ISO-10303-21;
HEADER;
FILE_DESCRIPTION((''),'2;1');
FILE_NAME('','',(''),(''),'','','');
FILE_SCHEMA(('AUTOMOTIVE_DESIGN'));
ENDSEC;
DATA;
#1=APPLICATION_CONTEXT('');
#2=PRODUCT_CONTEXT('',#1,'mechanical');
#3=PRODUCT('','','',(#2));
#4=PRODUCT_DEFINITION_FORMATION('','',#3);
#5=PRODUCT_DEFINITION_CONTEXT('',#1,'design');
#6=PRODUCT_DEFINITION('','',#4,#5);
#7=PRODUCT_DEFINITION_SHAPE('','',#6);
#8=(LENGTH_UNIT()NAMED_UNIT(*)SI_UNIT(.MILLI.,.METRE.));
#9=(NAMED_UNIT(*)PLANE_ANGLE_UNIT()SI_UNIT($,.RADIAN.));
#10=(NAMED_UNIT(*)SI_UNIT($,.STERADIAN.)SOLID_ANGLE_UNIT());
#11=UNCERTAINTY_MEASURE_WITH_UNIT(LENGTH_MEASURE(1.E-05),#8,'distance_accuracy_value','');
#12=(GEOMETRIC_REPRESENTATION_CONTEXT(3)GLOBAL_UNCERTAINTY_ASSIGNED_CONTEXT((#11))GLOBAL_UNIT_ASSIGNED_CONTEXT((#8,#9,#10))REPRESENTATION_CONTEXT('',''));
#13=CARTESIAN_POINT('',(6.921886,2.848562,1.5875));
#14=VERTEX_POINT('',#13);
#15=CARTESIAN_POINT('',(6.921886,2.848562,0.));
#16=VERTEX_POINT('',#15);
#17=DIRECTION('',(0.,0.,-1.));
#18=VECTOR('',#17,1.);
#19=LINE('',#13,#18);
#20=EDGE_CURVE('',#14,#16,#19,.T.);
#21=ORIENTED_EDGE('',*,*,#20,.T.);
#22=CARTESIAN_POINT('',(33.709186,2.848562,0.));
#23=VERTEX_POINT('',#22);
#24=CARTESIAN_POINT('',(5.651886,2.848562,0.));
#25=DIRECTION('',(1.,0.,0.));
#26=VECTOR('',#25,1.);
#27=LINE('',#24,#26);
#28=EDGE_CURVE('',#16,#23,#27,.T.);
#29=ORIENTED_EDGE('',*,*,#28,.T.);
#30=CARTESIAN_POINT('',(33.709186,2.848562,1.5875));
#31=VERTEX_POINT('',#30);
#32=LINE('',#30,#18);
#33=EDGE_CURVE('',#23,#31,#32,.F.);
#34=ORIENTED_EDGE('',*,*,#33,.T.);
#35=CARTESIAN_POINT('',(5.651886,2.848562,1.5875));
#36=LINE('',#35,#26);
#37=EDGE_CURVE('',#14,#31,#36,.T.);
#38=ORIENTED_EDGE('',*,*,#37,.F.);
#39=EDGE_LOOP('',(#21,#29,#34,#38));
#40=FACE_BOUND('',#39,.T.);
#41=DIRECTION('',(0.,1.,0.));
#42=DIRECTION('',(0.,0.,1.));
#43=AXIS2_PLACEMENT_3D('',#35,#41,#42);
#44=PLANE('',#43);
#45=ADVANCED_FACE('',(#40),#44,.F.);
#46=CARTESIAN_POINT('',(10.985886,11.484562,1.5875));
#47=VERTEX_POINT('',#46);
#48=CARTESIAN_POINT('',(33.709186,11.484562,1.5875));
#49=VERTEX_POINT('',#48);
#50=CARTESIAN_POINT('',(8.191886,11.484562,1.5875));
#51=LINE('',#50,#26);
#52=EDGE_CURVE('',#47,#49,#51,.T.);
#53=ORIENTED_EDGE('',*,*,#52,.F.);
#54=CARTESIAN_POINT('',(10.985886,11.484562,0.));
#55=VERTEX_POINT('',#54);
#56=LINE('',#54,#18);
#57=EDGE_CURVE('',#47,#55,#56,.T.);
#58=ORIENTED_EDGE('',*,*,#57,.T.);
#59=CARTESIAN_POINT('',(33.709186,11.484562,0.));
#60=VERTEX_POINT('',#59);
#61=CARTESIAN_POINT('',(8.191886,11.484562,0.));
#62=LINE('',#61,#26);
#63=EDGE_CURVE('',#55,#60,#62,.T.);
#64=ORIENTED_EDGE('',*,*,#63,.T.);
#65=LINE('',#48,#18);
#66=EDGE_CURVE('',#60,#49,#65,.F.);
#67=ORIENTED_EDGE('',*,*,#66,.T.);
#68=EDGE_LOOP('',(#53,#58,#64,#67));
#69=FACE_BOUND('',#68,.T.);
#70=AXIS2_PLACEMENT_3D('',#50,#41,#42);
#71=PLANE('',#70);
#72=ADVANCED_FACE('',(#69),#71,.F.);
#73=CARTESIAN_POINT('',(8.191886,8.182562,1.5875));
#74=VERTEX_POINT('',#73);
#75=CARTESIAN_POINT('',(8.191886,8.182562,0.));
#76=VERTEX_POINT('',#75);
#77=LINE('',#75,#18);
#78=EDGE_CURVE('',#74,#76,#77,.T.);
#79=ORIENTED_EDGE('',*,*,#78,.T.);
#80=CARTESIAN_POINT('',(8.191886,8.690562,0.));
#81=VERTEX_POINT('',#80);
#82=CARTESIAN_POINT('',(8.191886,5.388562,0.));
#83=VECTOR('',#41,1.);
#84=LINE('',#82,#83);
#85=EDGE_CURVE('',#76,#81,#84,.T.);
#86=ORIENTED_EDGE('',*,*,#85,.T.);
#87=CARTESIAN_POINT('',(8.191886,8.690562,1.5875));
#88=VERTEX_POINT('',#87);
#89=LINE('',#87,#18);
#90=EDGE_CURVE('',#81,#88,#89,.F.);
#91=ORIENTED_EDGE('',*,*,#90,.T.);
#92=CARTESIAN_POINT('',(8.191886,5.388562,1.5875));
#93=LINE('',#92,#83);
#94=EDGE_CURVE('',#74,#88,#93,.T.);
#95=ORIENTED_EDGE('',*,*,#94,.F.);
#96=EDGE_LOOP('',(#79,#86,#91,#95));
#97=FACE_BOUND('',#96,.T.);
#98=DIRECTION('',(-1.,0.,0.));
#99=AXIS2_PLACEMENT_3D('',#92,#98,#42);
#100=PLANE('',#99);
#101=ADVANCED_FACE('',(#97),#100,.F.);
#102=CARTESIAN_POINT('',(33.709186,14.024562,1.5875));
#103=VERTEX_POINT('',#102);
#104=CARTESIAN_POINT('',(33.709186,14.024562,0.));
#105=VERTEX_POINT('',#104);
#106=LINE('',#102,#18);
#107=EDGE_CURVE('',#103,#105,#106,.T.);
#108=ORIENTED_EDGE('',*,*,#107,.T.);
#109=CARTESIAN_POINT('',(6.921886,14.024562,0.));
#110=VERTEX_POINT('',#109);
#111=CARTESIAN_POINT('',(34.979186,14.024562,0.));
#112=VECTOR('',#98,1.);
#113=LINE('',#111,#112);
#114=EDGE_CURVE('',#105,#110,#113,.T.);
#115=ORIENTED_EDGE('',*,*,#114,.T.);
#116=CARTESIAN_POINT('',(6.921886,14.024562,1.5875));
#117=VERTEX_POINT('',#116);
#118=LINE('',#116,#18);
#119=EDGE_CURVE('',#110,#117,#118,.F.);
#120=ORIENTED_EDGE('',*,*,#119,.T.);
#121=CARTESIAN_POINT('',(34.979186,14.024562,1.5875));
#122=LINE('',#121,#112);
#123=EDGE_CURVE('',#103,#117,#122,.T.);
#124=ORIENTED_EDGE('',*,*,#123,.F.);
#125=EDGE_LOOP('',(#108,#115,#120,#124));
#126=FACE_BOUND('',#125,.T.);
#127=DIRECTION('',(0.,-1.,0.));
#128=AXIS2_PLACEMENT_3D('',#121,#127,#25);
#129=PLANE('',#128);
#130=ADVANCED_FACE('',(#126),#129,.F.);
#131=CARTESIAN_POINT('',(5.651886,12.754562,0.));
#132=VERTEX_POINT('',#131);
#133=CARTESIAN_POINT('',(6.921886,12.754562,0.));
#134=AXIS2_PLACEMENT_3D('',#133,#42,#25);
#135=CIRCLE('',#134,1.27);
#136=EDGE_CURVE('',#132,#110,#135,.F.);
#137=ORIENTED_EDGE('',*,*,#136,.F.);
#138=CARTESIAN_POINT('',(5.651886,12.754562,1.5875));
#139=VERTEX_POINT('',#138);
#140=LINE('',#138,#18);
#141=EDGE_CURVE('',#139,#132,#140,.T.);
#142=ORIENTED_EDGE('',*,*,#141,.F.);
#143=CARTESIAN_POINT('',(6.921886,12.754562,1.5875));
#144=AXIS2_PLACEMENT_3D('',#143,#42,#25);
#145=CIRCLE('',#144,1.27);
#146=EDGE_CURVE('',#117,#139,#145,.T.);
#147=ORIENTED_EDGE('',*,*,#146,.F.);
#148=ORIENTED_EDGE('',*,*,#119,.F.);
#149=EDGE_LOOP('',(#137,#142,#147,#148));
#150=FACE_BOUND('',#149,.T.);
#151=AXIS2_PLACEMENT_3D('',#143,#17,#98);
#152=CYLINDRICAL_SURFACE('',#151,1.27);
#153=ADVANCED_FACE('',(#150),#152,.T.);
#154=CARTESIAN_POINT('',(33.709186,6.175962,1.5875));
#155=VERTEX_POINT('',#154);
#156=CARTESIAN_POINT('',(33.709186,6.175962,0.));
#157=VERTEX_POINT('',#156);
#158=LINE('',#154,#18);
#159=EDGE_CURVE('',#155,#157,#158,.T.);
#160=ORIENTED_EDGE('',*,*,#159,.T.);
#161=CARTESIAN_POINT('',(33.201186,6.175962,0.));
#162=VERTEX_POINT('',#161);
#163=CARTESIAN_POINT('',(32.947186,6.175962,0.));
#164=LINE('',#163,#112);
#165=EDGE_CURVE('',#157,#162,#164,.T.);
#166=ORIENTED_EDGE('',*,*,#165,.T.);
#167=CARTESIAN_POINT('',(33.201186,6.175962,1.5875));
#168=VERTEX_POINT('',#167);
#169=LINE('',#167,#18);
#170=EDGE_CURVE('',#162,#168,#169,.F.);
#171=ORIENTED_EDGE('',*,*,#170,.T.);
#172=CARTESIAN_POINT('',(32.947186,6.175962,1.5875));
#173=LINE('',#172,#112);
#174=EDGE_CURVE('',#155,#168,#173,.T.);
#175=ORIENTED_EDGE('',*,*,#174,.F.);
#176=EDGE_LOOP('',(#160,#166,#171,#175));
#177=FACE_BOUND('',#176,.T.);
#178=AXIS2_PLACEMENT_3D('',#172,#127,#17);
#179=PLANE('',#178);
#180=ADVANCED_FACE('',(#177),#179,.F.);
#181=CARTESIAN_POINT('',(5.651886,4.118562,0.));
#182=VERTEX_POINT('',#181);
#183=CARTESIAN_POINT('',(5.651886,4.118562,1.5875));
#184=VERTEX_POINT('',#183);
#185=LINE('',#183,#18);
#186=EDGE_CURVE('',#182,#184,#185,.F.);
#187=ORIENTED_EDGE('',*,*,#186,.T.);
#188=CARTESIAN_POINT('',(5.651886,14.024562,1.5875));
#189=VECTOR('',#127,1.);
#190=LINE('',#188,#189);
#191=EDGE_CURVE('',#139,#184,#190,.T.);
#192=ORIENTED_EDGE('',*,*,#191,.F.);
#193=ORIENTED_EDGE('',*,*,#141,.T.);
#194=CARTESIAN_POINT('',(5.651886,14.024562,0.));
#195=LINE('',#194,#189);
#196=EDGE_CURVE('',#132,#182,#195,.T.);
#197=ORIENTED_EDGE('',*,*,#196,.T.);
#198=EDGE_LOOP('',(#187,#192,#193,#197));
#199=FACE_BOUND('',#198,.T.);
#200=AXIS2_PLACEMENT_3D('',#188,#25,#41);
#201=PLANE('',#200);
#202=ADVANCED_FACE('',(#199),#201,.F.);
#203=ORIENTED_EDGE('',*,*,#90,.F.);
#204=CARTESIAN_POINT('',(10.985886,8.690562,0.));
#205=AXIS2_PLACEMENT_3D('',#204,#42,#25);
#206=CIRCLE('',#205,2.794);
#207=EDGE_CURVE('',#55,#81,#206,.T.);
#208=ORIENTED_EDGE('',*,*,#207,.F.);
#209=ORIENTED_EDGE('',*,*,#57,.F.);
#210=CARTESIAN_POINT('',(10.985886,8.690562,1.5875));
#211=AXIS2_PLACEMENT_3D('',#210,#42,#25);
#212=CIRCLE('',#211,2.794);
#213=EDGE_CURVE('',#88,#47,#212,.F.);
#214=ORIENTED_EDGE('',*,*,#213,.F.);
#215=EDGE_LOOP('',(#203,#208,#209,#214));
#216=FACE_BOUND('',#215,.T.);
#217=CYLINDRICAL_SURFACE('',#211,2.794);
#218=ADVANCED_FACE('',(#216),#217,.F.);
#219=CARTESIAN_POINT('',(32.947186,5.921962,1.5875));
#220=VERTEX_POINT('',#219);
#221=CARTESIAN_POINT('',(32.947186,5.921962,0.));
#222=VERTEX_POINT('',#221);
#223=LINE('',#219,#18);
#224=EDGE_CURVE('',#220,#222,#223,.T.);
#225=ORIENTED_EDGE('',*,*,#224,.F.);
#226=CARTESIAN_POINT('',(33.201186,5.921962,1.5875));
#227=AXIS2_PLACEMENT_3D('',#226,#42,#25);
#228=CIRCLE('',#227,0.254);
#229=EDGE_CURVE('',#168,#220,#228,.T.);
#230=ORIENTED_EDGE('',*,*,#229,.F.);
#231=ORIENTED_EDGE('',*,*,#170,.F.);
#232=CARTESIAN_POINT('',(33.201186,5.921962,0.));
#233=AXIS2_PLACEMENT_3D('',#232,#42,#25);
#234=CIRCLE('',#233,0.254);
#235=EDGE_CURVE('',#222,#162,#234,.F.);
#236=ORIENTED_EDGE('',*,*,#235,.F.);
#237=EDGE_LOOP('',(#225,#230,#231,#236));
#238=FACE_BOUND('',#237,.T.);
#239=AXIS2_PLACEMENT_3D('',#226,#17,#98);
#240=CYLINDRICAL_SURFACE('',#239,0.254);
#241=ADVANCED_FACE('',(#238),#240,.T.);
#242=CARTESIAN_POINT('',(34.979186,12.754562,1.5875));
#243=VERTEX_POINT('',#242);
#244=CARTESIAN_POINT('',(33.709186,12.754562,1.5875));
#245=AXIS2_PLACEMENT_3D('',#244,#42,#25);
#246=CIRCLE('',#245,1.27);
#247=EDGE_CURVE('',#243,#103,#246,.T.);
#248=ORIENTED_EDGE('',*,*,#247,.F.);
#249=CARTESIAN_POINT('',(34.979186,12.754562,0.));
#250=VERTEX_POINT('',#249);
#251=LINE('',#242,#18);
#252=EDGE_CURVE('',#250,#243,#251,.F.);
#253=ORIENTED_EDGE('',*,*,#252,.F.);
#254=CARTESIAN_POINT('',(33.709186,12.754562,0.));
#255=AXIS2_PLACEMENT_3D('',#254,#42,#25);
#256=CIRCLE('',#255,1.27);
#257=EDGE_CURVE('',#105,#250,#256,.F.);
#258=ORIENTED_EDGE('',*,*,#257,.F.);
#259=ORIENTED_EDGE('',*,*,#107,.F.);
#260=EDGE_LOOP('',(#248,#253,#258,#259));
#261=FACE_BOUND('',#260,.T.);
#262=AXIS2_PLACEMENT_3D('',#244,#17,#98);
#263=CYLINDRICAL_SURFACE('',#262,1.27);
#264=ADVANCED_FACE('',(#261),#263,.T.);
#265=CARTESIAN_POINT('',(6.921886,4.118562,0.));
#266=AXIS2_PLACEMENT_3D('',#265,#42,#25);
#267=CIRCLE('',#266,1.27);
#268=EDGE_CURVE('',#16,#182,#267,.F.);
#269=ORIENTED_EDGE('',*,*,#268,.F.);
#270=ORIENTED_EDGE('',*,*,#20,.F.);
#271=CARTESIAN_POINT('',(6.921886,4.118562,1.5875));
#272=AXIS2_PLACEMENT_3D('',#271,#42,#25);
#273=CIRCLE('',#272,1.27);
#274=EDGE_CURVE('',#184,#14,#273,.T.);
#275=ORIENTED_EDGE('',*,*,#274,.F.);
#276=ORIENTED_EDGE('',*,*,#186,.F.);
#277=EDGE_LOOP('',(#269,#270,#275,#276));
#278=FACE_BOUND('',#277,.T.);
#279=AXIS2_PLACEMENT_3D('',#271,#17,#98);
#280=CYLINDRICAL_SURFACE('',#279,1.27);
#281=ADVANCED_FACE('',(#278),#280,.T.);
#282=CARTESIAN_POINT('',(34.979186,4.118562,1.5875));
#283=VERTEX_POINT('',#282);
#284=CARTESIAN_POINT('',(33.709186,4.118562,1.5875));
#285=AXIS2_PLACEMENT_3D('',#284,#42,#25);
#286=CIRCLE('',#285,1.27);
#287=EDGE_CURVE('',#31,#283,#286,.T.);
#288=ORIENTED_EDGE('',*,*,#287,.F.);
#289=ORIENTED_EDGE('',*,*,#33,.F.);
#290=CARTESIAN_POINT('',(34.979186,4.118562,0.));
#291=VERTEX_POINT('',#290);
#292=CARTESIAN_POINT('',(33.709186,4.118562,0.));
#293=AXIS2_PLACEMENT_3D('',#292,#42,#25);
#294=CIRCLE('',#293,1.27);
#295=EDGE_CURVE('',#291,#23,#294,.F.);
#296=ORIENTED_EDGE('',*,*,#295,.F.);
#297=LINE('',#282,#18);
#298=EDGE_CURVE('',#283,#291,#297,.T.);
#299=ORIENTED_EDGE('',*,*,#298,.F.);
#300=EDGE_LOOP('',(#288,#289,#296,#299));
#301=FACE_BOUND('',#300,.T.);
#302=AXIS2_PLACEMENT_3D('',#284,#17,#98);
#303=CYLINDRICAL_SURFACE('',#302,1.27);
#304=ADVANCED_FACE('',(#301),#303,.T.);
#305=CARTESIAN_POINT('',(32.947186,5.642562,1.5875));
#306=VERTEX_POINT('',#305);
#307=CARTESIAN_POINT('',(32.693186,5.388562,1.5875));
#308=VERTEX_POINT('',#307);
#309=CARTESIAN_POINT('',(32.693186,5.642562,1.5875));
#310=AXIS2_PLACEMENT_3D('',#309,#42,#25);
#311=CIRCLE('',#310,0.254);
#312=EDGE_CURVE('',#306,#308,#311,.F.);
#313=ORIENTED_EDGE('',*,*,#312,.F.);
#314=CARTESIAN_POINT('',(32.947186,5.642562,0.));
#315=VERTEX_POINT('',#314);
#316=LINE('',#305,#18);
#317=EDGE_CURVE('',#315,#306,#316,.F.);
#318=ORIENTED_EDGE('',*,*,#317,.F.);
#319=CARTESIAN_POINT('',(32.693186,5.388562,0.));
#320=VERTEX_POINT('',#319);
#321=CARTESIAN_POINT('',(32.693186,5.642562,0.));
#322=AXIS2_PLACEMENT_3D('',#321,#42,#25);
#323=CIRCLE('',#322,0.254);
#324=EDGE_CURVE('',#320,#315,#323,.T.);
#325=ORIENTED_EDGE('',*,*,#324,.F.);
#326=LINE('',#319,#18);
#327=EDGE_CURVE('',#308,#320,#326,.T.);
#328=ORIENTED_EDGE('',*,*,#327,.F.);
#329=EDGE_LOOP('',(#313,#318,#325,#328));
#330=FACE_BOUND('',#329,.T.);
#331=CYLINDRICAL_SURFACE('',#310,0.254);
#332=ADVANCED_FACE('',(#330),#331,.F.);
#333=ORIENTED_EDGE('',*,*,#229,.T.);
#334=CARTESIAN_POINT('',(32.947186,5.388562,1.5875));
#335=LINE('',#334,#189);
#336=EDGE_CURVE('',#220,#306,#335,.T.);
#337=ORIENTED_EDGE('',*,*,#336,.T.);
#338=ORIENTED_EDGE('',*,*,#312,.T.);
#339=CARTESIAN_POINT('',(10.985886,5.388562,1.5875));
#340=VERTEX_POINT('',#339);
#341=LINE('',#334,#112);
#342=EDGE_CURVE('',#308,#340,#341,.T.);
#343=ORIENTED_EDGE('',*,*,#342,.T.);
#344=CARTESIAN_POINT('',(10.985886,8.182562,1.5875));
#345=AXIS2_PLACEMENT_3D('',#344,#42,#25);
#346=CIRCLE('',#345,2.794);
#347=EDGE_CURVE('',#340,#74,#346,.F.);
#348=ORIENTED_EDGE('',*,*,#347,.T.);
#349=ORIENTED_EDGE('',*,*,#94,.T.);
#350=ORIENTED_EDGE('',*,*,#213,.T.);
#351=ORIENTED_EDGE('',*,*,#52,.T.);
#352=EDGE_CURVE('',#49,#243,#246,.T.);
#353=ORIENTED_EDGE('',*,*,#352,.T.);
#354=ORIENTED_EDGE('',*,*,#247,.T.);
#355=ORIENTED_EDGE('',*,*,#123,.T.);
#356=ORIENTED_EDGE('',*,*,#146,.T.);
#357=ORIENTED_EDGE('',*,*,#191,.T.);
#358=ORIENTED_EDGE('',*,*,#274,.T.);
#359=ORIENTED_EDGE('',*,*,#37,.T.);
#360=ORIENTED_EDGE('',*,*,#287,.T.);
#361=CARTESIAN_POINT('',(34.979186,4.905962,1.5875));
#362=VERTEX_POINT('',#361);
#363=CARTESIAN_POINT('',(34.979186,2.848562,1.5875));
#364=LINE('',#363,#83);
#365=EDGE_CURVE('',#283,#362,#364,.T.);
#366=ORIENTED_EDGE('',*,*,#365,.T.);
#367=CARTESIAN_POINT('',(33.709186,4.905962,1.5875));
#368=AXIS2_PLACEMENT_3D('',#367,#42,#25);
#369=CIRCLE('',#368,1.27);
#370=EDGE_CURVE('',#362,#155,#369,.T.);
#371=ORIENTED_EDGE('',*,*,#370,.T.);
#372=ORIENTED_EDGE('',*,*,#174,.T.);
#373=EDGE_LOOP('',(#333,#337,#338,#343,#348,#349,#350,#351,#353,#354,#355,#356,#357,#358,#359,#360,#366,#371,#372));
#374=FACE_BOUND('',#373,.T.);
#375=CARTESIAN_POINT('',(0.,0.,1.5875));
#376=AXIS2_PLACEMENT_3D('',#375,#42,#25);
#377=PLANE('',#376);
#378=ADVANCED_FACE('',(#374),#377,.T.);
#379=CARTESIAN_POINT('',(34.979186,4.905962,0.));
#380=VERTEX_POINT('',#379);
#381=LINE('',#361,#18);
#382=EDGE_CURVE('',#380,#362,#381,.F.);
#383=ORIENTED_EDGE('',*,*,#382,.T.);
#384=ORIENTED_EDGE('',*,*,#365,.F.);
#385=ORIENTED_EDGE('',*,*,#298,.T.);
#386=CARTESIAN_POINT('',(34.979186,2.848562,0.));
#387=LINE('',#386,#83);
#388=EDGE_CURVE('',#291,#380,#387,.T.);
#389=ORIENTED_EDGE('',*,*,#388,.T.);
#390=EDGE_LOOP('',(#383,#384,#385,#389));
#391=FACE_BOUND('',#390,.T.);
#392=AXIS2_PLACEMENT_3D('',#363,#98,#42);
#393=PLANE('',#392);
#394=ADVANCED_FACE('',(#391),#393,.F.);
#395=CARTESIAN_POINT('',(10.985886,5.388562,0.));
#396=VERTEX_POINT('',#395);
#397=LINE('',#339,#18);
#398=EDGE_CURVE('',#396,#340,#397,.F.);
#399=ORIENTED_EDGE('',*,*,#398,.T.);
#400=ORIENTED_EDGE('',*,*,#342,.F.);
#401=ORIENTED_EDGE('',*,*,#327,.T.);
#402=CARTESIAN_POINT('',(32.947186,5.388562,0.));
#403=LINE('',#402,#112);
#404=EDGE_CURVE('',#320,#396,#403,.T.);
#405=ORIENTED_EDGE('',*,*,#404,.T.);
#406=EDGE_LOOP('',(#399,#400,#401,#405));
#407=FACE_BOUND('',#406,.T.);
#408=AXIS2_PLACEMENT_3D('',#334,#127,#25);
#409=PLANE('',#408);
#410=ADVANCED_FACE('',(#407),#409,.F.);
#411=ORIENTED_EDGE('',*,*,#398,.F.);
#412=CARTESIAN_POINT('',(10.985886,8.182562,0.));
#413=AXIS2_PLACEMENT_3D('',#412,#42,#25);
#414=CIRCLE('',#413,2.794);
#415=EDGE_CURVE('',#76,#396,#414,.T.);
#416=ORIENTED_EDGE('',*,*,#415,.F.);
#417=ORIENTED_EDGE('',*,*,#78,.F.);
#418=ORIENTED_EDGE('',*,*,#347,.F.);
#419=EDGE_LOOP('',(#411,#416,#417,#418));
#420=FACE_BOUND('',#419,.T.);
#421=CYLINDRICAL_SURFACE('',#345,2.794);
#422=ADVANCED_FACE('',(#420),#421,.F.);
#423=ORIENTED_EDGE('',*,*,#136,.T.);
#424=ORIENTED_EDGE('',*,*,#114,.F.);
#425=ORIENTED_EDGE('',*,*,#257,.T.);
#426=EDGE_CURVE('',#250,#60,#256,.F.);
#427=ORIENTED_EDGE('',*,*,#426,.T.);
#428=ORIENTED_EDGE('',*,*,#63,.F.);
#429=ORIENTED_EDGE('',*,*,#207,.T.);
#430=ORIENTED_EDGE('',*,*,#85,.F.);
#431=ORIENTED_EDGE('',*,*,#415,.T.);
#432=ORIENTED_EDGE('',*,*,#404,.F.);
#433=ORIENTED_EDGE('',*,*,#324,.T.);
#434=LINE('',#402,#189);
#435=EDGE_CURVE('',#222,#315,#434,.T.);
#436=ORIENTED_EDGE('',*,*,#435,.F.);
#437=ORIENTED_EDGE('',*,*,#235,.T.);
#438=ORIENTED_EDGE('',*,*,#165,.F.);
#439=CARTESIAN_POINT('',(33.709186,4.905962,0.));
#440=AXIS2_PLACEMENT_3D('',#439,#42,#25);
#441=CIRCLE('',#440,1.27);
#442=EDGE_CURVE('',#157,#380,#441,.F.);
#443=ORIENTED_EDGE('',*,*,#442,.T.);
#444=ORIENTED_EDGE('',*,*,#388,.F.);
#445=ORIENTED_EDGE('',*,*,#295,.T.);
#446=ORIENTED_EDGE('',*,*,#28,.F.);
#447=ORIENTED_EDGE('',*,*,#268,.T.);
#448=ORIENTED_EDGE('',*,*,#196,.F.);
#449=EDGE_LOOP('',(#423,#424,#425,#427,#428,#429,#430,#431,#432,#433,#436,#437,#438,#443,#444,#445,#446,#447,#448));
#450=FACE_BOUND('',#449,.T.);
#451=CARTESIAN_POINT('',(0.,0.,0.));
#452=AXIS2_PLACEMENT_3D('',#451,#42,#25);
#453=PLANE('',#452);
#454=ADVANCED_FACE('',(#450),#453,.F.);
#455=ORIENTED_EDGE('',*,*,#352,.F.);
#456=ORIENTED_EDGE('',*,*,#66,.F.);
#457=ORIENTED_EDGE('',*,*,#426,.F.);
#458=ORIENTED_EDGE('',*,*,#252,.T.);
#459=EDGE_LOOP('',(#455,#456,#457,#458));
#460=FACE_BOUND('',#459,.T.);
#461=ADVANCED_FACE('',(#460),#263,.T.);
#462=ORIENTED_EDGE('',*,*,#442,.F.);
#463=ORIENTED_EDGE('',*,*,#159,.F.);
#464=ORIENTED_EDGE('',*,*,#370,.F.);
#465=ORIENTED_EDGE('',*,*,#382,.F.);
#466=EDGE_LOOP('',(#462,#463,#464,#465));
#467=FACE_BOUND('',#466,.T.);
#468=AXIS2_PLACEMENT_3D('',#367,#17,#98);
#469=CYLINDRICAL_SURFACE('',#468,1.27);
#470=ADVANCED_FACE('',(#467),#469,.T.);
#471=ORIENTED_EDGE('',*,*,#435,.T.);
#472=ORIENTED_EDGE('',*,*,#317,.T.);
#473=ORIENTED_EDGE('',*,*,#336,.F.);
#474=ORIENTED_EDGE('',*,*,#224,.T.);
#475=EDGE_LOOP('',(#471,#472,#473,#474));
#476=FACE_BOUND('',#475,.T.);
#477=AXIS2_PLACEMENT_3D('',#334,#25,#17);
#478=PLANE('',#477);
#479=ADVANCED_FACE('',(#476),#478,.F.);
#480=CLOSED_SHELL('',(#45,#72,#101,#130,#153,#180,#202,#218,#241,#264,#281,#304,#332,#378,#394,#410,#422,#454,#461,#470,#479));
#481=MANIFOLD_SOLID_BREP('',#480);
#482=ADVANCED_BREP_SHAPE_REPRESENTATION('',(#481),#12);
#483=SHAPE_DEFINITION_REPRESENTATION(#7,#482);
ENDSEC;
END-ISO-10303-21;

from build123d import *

# Parameters (mm, degrees)
BOSS_EXTRUDE1_DEPTH = 1.5875
FILLET1_R           = 1.27
FILLET2_R           = 0.254
FILLET3_R           = 2.794


with BuildPart() as part:
    # Sketch1 → Boss-Extrude1 (new body)
    with BuildSketch(Plane.XY):
        Polygon((5.651886258, 2.848562209), (34.979186258, 2.848562209), (34.979186258, 6.175962209), (32.947186258, 6.175962209), (32.947186258, 5.388562209), (8.191886258, 5.388562209), (8.191886258, 11.484562209), (34.979186258, 11.484562209), (34.979186258, 14.024562209), (5.651886258, 14.024562209), align=None)
    extrude(amount=BOSS_EXTRUDE1_DEPTH)

    # Fillet1
    fillet1_edges = [part.edges().sort_by_distance(p)[0] for p in [
        (5.651886258, 14.024562209, 0.79375),
        (34.979186258, 14.024562209, 0.79375),
        (34.979186258, 11.484562209, 0.79375),
        (34.979186258, 6.175962209, 0.79375),
        (34.979186258, 2.848562209, 0.79375),
        (5.651886258, 2.848562209, 0.79375),
    ]]
    fillet(fillet1_edges, radius=FILLET1_R - 0.0001)  # a hair under: the kernel refuses the full size

    # Fillet2
    fillet2_edges = [part.edges().sort_by_distance(p)[0] for p in [
        (32.947186258, 5.388562209, 0.79375),
        (32.947186258, 6.175962209, 0.79375),
    ]]
    fillet(fillet2_edges, radius=FILLET2_R)

    # Fillet3
    fillet3_edges = [part.edges().sort_by_distance(p)[0] for p in [
        (8.191886258, 11.484562209, 0.79375),
        (8.191886258, 5.388562209, 0.79375),
    ]]
    fillet(fillet3_edges, radius=FILLET3_R)


solid = part.part
